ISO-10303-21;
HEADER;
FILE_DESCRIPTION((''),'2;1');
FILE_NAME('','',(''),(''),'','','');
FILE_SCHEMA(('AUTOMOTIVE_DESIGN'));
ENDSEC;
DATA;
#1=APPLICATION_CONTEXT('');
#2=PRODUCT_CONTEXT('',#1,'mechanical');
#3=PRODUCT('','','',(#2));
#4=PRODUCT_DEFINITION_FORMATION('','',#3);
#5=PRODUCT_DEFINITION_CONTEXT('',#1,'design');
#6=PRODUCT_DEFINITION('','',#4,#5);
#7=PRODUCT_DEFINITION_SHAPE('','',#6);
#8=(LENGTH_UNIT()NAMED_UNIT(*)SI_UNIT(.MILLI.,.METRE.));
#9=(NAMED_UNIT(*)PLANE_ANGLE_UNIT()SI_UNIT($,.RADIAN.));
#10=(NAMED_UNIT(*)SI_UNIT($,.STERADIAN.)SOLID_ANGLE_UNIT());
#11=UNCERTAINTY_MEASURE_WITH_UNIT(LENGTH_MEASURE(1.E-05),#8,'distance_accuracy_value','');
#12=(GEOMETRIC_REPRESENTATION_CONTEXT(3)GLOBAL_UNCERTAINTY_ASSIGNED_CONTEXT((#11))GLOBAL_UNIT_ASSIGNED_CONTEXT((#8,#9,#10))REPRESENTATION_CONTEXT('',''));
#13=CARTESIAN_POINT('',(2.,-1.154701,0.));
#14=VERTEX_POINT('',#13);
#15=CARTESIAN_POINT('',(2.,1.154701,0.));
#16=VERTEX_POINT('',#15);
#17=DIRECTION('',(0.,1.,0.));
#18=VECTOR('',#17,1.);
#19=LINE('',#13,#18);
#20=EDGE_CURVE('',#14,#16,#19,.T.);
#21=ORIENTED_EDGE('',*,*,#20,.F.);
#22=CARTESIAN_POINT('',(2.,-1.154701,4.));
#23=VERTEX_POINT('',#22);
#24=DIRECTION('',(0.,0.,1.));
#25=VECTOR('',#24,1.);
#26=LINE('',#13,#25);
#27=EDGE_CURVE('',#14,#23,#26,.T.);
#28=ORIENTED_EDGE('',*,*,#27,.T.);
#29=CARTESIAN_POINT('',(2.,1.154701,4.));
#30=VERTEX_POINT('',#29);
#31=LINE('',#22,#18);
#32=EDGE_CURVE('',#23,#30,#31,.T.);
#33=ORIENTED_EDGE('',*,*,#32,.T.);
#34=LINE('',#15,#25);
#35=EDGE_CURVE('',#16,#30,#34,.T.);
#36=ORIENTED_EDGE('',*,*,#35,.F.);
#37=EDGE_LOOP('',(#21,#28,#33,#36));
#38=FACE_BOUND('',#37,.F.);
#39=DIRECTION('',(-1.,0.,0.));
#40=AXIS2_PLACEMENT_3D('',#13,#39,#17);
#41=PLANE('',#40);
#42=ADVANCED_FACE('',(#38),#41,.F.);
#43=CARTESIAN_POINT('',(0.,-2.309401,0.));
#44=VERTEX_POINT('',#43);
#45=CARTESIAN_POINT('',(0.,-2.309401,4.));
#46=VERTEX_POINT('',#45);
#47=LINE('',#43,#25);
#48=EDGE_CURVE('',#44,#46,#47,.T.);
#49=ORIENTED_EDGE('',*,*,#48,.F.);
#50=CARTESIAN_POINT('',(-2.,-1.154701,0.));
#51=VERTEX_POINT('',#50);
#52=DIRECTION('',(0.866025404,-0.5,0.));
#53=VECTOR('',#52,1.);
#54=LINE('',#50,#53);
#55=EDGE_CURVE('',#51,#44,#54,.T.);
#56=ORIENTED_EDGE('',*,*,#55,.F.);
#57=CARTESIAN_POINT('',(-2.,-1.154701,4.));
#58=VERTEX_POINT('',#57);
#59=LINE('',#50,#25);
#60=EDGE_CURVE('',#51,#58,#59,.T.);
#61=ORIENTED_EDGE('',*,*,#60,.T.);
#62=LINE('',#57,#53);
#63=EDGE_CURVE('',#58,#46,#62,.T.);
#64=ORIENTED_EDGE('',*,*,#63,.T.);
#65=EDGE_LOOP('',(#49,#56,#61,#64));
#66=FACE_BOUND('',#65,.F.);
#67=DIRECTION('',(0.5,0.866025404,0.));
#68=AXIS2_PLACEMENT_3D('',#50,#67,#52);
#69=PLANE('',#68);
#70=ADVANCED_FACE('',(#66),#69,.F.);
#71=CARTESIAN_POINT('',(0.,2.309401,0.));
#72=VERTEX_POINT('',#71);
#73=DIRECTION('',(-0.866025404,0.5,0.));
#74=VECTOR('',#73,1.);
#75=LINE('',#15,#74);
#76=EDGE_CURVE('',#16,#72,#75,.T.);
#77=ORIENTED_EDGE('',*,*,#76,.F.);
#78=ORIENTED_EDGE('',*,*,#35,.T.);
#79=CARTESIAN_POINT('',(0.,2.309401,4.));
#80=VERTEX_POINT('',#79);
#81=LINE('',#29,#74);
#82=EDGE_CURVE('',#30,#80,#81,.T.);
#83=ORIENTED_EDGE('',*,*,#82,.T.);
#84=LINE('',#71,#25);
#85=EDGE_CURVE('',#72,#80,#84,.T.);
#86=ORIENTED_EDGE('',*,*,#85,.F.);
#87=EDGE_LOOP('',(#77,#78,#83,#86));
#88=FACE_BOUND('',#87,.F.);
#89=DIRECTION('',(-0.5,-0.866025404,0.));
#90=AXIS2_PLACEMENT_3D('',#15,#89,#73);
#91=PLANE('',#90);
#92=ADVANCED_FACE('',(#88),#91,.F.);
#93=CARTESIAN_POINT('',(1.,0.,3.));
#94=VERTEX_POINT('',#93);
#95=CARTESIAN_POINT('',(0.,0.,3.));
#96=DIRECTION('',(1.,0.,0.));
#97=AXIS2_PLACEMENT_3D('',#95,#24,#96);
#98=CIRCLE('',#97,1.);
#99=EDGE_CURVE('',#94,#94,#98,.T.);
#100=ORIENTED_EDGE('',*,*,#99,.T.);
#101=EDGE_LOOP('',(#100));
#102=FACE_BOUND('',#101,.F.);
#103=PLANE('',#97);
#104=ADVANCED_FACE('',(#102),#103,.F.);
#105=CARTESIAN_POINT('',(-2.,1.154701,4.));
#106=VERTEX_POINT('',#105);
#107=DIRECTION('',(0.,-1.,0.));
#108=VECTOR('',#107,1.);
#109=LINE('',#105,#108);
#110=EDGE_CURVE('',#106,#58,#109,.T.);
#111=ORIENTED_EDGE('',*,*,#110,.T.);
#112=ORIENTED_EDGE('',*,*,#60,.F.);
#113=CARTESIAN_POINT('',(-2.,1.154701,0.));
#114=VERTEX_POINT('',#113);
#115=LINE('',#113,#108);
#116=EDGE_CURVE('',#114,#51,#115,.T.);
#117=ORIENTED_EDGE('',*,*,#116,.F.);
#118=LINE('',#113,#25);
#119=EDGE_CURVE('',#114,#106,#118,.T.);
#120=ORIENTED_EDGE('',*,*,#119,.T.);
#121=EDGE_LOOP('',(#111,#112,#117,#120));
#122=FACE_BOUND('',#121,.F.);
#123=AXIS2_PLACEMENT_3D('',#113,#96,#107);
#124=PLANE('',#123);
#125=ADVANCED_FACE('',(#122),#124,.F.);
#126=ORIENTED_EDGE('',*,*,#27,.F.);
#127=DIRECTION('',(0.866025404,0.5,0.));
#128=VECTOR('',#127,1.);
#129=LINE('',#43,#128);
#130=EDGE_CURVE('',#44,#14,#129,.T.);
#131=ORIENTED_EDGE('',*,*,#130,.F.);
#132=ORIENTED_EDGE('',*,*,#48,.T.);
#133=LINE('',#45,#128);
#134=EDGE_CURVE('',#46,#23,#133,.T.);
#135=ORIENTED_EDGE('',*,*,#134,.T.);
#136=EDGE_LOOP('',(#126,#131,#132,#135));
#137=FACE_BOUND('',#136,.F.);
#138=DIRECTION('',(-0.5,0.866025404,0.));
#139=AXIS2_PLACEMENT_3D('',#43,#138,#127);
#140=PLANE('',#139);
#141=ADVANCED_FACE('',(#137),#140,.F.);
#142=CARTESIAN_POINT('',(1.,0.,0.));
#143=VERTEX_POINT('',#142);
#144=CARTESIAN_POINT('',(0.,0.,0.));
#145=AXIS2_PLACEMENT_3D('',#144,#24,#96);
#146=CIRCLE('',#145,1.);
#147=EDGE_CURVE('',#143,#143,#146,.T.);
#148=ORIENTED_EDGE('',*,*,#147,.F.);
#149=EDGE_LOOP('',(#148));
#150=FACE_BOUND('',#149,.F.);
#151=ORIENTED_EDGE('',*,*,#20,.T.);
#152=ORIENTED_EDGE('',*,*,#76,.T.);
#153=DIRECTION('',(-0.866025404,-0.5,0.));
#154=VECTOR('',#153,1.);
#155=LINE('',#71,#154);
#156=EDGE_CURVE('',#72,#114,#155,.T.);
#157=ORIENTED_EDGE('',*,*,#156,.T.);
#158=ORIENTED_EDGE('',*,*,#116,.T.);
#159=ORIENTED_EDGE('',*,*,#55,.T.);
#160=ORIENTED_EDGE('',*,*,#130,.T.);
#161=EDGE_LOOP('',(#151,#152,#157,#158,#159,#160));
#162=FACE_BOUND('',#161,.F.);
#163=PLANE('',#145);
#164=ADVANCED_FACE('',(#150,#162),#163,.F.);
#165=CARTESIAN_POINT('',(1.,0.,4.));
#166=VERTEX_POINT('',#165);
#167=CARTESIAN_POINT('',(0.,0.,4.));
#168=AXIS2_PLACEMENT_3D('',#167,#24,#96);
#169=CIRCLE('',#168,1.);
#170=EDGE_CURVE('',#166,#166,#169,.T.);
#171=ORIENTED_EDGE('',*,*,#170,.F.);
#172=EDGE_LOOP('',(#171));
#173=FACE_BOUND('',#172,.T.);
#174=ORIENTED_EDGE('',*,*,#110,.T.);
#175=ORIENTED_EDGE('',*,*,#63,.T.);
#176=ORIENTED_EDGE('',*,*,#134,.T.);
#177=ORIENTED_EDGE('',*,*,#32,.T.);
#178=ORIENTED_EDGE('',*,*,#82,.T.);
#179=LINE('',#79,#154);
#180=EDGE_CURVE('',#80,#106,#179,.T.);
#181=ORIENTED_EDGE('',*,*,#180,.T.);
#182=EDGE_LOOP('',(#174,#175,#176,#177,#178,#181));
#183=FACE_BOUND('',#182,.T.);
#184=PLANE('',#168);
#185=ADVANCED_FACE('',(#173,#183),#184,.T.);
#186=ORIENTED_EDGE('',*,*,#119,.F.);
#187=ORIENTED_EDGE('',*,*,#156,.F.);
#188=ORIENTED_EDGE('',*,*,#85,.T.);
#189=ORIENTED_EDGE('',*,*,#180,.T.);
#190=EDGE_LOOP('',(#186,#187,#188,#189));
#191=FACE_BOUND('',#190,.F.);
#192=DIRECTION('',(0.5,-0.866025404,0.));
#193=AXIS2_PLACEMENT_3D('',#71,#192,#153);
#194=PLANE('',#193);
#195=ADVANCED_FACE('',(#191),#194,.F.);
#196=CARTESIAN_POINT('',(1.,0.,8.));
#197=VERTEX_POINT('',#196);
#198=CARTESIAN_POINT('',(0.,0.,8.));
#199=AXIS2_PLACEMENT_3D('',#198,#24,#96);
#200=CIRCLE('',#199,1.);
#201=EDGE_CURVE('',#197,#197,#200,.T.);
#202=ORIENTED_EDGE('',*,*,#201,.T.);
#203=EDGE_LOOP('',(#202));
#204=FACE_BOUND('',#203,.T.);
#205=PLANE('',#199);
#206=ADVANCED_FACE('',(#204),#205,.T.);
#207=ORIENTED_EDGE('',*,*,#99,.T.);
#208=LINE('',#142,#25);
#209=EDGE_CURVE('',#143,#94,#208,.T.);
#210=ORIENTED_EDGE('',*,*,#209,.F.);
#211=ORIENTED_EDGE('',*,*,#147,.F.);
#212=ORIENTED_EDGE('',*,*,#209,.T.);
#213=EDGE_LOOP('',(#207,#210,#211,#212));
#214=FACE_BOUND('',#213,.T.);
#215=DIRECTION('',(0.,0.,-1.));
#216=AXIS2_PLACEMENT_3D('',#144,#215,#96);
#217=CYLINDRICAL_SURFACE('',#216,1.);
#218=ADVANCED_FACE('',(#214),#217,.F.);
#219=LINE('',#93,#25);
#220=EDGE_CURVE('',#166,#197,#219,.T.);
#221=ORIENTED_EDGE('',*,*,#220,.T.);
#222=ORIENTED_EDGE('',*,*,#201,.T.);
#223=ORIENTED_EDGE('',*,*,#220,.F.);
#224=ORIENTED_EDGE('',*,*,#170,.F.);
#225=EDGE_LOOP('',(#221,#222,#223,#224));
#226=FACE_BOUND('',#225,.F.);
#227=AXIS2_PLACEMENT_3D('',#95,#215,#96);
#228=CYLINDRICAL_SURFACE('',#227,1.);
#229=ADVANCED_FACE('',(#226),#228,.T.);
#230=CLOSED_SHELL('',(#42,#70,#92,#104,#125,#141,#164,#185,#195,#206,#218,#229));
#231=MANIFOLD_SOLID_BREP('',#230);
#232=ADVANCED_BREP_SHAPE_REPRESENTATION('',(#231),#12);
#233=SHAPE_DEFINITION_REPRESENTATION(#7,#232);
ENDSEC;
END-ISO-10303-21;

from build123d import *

# Parameters (mm, degrees)
F0_R     = 1
F1_DEPTH = 4
F2_START = 3
F2_DEPTH = 5


with BuildPart() as f1:
    # F0 (on Top) → F1 (new body)
    with BuildSketch(Plane.XY):
        Polygon((-2, 1.1547005384), (-2, -1.1547005384), (0, -2.3094010768), (2, -1.1547005384), (2, 1.1547005384), (0, 2.3094010768), align=None)
        Circle(F0_R, mode=Mode.SUBTRACT)
    extrude(amount=F1_DEPTH)

    # F0 (on Top) → F2 (join)
    with BuildSketch(Plane.XY.offset(F2_START)):
        Circle(F0_R)
    extrude(amount=F2_DEPTH)


solid = f1.part
